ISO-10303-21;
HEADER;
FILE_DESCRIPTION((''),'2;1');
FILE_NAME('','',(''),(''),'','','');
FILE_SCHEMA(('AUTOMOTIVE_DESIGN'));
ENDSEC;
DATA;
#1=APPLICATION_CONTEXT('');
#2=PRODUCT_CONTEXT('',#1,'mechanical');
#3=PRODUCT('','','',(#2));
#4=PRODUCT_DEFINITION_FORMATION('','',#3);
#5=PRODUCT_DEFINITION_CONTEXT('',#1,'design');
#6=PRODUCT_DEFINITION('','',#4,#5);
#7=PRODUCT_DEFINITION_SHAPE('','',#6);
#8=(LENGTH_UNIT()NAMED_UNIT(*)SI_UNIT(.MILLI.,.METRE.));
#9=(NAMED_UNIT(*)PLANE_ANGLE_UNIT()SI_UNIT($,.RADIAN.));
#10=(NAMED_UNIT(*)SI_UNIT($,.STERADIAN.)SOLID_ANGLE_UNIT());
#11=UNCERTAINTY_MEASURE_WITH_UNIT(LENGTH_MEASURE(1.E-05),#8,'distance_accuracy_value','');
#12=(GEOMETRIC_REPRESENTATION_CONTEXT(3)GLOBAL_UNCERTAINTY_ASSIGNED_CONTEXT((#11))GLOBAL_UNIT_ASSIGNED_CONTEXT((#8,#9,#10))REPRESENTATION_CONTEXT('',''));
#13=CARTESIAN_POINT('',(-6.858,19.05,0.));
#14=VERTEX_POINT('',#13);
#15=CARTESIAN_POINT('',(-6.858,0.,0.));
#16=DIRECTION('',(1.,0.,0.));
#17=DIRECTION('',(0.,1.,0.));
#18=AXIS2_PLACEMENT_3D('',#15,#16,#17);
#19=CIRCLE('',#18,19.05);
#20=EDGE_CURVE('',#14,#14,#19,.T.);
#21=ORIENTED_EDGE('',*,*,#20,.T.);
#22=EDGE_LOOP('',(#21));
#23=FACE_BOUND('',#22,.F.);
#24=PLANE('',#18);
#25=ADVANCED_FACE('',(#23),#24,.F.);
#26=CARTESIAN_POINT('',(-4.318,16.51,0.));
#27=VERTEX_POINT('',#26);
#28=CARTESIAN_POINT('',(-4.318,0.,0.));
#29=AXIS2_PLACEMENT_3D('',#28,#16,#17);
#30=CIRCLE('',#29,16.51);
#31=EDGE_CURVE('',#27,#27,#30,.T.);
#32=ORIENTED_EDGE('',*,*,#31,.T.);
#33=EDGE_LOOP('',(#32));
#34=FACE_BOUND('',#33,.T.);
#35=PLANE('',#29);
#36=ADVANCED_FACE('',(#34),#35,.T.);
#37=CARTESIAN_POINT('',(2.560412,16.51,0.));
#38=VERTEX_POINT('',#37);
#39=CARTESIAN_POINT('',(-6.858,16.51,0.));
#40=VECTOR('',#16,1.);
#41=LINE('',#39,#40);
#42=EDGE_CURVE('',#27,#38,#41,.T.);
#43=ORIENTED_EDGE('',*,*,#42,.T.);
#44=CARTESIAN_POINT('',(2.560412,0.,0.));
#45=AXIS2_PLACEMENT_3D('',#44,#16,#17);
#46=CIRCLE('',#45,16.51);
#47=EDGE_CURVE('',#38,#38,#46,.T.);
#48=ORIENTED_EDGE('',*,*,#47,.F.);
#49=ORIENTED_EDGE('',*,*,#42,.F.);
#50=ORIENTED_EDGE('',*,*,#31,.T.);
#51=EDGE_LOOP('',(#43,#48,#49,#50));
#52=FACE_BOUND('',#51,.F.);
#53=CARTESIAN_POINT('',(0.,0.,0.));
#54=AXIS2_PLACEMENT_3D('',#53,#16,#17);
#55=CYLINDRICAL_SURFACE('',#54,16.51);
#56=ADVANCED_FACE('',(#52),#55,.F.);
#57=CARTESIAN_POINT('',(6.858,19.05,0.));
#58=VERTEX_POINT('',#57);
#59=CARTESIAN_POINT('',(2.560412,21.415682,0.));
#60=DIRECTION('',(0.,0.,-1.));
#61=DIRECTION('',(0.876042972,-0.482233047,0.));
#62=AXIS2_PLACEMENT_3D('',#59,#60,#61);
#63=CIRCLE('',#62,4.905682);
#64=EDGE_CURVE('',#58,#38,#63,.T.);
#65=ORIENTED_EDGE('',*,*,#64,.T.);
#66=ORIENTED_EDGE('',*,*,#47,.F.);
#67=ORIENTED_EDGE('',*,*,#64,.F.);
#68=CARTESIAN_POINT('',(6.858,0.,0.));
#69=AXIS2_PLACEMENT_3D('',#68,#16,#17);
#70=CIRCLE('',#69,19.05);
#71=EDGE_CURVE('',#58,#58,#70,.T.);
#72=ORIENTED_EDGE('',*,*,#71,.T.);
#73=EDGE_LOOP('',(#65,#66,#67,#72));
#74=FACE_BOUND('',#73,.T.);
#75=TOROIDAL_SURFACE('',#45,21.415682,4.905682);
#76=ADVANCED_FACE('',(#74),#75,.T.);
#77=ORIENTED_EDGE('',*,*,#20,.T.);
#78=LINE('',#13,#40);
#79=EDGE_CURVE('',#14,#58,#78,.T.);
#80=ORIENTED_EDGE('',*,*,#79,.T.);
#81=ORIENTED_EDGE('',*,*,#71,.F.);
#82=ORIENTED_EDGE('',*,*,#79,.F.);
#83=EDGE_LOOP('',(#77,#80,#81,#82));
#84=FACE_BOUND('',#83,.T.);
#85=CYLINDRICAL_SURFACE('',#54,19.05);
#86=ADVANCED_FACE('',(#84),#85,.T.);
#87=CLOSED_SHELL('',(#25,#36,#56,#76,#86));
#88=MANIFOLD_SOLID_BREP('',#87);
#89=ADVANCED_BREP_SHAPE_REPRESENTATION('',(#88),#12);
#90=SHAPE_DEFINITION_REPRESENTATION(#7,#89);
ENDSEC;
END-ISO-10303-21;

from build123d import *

# Parameters (mm, degrees)
F0_R     = 19.05
F0_R_2   = 12.7
F0_R_3   = 6.35
F1_DEPTH = 6.858
F2_T     = -2.54


# Not quite as in the source:
# - a fillet or chamfer that OpenCascade refuses, or shapes differently, is made with other operations: its cross-section is extruded or revolved along the edge and cut away or added
# - the program builds the solid bodies; features that only make, move or delete a surface that nothing else refers to are left out


with BuildPart() as f1:
    # F0 (on Right) → F1 (new body, symmetric)
    with BuildSketch(Plane.YZ):
        Circle(F0_R)
        Circle(F0_R_2, mode=Mode.SUBTRACT)
        Circle(F0_R_2)
        Circle(F0_R_3, mode=Mode.SUBTRACT)
        Circle(F0_R_3)
    extrude(amount=F1_DEPTH, both=True)

    # F2
    f2_openings = [f1.faces().sort_by_distance(p)[0] for p in [
        (6.858, 0, 0),
    ]]
    offset(amount=F2_T, openings=f2_openings)

    # F4: fillet of radius 4.9056819587 on 1 edges, made by hand

    # F4_s1 → F4_t2 (revolve, cut)
    with BuildSketch(Plane.XY):
        with BuildLine():
            ThreePointArc((6.858, 19.05), (5.0564518797, 17.1924723508), (2.5604117984, 16.51))
            Line((2.5604117984, 16.51), (6.858, 16.51))
            Line((6.858, 16.51), (6.858, 19.05))
        make_face()
    revolve(axis=Axis((6.858, 0, 0), (1, 0, 0)), mode=Mode.SUBTRACT)


solid = f1.part
